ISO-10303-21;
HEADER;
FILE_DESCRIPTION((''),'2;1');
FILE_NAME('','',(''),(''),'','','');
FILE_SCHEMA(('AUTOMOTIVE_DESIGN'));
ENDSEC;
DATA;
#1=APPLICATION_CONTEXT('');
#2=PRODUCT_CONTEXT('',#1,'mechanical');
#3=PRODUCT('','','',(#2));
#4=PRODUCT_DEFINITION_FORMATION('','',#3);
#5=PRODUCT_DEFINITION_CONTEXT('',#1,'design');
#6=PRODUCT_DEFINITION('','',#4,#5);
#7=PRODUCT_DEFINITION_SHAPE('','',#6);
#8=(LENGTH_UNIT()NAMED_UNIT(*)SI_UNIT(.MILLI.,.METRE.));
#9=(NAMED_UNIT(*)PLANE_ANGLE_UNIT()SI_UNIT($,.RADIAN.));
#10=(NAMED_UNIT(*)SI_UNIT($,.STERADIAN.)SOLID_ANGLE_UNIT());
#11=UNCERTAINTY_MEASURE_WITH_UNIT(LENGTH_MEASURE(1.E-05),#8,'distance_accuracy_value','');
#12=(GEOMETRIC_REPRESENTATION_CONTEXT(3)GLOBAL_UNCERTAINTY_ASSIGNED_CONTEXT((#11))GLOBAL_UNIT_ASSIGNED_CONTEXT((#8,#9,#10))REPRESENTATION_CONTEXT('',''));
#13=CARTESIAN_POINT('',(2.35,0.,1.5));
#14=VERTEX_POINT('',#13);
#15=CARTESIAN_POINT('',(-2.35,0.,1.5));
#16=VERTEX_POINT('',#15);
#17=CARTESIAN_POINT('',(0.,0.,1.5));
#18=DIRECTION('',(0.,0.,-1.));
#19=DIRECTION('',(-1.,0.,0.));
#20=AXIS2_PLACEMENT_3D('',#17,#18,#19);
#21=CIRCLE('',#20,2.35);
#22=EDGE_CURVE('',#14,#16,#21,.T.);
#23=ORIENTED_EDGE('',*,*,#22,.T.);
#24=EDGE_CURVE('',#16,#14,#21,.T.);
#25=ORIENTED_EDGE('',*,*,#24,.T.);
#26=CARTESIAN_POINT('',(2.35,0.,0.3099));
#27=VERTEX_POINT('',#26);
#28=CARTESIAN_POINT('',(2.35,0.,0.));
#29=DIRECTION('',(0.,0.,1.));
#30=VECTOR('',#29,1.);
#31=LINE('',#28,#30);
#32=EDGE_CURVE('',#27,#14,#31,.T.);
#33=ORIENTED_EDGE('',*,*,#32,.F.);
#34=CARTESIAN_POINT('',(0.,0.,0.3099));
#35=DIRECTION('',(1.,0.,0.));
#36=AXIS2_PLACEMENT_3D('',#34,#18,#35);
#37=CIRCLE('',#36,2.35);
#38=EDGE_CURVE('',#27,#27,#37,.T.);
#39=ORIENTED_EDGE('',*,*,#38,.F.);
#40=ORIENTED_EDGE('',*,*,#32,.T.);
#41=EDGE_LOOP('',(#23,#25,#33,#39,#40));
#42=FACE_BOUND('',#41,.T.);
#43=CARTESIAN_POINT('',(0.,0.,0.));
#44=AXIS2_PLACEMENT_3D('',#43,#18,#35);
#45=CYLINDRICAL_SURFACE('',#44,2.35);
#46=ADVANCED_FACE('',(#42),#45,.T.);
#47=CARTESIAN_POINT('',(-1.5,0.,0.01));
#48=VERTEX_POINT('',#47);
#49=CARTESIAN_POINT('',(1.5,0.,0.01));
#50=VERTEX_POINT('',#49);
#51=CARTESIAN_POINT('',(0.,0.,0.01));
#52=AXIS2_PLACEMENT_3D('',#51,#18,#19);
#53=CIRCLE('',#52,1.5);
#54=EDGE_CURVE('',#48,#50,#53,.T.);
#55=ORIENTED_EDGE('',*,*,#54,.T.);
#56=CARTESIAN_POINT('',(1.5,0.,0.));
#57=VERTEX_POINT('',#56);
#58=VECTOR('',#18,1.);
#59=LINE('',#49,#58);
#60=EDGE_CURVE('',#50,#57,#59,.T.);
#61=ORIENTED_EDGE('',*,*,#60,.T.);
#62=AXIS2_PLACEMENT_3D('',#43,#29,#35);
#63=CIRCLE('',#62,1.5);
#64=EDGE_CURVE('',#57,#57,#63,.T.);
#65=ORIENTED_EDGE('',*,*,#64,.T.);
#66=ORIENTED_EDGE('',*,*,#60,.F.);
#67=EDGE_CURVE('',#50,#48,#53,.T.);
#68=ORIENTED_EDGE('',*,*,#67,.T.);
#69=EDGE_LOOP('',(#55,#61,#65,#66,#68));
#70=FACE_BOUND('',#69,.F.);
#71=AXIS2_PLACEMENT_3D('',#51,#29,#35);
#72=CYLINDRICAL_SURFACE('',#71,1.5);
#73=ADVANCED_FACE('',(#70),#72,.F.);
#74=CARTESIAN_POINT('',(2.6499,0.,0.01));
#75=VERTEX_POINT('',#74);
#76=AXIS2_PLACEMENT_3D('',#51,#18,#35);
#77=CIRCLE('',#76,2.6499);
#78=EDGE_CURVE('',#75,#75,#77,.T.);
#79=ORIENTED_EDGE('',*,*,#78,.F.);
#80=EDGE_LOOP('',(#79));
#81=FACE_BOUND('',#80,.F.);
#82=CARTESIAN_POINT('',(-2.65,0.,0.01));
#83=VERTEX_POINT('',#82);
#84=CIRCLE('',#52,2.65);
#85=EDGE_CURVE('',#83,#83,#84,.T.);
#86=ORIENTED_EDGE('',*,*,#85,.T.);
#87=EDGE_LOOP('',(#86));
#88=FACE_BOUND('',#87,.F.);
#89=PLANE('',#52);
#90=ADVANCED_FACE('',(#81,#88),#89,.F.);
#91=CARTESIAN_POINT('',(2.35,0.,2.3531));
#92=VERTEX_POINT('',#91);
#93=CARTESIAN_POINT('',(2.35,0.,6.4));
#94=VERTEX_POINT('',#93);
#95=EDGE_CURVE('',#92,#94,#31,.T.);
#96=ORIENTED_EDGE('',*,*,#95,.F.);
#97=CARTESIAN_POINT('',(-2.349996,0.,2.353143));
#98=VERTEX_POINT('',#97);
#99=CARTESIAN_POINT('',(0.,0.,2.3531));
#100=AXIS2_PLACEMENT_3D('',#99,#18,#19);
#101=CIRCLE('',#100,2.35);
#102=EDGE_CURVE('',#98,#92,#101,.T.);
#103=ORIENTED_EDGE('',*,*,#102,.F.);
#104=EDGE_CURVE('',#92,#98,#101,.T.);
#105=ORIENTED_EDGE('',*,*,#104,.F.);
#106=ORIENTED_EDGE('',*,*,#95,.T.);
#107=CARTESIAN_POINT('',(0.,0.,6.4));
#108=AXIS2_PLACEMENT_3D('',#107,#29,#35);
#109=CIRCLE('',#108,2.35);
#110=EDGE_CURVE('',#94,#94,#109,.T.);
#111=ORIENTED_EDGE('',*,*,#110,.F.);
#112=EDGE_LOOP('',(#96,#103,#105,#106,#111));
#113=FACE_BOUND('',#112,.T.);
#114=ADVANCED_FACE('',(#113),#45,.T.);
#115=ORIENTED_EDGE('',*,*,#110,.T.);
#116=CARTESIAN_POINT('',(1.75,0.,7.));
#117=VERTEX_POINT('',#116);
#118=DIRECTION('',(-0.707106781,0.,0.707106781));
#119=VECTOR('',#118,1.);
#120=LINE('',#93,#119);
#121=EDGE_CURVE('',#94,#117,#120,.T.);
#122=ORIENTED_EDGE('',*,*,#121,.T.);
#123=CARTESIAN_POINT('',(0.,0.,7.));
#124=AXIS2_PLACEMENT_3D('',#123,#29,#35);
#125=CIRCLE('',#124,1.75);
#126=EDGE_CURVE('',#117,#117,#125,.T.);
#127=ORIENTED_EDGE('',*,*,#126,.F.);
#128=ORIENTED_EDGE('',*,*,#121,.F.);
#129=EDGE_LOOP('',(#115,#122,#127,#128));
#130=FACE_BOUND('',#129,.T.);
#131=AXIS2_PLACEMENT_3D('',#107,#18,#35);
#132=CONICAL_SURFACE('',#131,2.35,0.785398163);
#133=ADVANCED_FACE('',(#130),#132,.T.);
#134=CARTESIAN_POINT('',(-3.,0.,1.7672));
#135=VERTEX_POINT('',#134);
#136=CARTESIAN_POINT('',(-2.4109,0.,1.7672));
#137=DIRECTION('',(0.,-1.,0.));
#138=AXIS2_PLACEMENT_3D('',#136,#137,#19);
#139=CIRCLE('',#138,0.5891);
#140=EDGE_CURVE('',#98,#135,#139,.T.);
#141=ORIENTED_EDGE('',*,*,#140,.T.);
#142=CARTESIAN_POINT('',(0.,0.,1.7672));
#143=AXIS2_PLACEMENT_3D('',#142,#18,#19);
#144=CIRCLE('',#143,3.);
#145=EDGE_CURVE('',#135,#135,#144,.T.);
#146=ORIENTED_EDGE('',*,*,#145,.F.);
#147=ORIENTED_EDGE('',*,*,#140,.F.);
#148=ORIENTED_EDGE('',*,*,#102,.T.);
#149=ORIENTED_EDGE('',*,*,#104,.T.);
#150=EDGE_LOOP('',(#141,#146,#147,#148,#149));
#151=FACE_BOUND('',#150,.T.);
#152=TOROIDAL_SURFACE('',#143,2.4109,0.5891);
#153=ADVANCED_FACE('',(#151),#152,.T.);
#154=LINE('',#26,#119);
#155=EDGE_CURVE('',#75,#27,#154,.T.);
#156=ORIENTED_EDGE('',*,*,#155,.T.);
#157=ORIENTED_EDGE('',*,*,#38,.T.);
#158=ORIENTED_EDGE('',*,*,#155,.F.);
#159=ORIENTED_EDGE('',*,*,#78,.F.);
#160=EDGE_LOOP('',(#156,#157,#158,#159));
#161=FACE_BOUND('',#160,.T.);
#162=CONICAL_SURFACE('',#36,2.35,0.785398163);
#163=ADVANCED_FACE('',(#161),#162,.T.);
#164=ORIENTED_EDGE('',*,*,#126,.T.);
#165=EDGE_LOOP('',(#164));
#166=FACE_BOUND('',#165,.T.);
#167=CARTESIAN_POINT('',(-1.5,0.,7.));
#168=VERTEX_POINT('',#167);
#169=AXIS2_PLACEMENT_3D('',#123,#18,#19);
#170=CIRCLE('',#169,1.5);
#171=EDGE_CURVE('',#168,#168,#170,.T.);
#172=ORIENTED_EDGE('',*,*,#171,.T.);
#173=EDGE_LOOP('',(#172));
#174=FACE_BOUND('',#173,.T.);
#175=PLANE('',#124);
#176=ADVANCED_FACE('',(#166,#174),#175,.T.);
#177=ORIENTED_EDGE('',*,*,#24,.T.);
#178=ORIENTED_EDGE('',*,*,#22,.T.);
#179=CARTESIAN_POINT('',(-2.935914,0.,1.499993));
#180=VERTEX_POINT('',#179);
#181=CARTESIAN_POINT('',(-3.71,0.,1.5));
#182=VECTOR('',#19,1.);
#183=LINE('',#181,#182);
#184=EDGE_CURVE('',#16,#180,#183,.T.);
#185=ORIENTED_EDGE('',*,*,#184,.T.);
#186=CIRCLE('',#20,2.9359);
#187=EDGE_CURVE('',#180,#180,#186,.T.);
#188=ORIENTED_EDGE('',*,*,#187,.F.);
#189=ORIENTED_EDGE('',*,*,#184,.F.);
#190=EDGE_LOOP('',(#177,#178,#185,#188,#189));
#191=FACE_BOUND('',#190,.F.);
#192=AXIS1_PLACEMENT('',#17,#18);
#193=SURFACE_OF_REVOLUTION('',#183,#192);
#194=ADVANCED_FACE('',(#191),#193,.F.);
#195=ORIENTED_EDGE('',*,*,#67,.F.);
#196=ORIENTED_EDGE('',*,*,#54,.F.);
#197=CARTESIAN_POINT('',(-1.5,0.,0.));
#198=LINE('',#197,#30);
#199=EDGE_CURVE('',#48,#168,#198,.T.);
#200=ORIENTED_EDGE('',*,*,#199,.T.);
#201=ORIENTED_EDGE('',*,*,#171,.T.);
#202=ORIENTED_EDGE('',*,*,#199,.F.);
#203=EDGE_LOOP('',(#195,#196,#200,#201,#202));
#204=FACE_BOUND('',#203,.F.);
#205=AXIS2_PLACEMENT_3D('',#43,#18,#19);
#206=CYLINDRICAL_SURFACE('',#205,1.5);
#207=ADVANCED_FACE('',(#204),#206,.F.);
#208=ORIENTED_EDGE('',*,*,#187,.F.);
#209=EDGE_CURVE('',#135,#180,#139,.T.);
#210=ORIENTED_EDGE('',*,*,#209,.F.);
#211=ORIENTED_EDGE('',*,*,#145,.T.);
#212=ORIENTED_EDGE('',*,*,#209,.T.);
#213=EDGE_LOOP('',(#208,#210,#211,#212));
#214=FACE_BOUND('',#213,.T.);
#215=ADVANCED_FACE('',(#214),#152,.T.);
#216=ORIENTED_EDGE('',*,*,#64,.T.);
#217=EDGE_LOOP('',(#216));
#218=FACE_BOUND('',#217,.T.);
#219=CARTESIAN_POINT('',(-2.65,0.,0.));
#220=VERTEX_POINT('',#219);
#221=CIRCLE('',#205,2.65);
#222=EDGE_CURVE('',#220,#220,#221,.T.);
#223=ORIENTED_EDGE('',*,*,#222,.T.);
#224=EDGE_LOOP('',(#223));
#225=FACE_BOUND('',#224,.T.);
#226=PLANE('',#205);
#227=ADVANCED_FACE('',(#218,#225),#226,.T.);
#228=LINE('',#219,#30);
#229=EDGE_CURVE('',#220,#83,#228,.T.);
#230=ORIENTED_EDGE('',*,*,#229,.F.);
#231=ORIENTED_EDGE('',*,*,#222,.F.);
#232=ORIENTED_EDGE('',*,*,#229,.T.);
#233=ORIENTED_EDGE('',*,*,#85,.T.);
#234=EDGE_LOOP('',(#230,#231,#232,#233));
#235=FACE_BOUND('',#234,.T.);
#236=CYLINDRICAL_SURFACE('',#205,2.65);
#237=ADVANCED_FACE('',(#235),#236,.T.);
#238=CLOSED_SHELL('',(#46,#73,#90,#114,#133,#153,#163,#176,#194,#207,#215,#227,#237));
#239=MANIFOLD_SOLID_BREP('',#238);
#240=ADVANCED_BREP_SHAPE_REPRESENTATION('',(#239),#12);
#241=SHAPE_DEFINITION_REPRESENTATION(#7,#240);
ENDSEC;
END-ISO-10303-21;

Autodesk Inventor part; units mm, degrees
ref_plane "YZ Plane" through (0, 0, 0) normal (1, 0, 0) x (0, 1, 0)
ref_plane "XZ Plane" through (0, 0, 0) normal (0, 1, 0) x (-1, 0, 0)
sketch "Sketch1" plane through (0, 0, 0) normal (0, 0, 1) x (1, 0, 0)
  circle A0 centre (0, 0) radius 2.35
  dimension "d0" = 4.7
extrude "Extrusion1" add sketch "Sketch1" along normal blind 7
chamfer "Chamfer1" distance 0.6 angle 45 1 edges at (-2.35, 0, 7)
sketch "Sketch2" plane through (0, 0, 0) normal (0, 0, -1) x (-1, 0, 0)
  circle A0 centre (0, 0) radius 1.5
  dimension "d6" = 3
extrude "Extrusion2" cut sketch "Sketch2" against normal through all
sketch "Sketch3" plane through (0, 0, 0) normal (0, 0, -1) x (-1, 0, 0)
  circle A0 centre (0, 0) radius 2.65
  dimension "d11" = 5.3
extrude "Extrusion3" add sketch "Sketch3" against normal blind 0.01
chamfer "Chamfer2" distance 0.3 angle 45 1 edges at (-2.35, 0, 0.01)
sketch "Sketch4" plane through (0, 0, 0.01) normal (0, 0, 1) x (1, 0, 0)
  circle A0 centre (0, 0) radius 1.5 projected
extrude "Extrusion4" cut sketch "Sketch4" against normal through all
ref_plane "Work Plane1" through (0, 0, 1.5) normal (0, 0, -1) x (-1, 0, 0)
sketch "Sketch6" plane through (0, 0, 0) normal (1, 0, 0) x (0, 1, 0)
  line L0 (2.35, 0.31) -> (2.35, 6.4) projected
  line L1 (3.71, 1.5) -> (-3.71, 1.5) projected
  circle A0 centre (2.4109, 1.7672) radius 0.5891
  line L2 (2.9359, 1.5) -> (2.35, 1.5)
  line L3 (2.35, 1.5) -> (2.35, 2.3531)
  line L4 (0, -1.4) -> (0, 8.4) projected
  point P0 (0, 0)
  dimension "d18" = 3
sketch "Sketch5" plane through (0, 0, 1.5) normal (0, 0, -1) x (-1, 0, 0)
  circle A0 centre (0, 0) radius 2.35 projected
  circle A1 centre (0, 0) radius 2.35 projected
sweep "Sweep1" add profiles "Sketch6" path "Sketch5" picked at (2.489, 2.0554) path curves A0 contours L0 A0 L1
properties part number "pop_PSZROX-0315"
